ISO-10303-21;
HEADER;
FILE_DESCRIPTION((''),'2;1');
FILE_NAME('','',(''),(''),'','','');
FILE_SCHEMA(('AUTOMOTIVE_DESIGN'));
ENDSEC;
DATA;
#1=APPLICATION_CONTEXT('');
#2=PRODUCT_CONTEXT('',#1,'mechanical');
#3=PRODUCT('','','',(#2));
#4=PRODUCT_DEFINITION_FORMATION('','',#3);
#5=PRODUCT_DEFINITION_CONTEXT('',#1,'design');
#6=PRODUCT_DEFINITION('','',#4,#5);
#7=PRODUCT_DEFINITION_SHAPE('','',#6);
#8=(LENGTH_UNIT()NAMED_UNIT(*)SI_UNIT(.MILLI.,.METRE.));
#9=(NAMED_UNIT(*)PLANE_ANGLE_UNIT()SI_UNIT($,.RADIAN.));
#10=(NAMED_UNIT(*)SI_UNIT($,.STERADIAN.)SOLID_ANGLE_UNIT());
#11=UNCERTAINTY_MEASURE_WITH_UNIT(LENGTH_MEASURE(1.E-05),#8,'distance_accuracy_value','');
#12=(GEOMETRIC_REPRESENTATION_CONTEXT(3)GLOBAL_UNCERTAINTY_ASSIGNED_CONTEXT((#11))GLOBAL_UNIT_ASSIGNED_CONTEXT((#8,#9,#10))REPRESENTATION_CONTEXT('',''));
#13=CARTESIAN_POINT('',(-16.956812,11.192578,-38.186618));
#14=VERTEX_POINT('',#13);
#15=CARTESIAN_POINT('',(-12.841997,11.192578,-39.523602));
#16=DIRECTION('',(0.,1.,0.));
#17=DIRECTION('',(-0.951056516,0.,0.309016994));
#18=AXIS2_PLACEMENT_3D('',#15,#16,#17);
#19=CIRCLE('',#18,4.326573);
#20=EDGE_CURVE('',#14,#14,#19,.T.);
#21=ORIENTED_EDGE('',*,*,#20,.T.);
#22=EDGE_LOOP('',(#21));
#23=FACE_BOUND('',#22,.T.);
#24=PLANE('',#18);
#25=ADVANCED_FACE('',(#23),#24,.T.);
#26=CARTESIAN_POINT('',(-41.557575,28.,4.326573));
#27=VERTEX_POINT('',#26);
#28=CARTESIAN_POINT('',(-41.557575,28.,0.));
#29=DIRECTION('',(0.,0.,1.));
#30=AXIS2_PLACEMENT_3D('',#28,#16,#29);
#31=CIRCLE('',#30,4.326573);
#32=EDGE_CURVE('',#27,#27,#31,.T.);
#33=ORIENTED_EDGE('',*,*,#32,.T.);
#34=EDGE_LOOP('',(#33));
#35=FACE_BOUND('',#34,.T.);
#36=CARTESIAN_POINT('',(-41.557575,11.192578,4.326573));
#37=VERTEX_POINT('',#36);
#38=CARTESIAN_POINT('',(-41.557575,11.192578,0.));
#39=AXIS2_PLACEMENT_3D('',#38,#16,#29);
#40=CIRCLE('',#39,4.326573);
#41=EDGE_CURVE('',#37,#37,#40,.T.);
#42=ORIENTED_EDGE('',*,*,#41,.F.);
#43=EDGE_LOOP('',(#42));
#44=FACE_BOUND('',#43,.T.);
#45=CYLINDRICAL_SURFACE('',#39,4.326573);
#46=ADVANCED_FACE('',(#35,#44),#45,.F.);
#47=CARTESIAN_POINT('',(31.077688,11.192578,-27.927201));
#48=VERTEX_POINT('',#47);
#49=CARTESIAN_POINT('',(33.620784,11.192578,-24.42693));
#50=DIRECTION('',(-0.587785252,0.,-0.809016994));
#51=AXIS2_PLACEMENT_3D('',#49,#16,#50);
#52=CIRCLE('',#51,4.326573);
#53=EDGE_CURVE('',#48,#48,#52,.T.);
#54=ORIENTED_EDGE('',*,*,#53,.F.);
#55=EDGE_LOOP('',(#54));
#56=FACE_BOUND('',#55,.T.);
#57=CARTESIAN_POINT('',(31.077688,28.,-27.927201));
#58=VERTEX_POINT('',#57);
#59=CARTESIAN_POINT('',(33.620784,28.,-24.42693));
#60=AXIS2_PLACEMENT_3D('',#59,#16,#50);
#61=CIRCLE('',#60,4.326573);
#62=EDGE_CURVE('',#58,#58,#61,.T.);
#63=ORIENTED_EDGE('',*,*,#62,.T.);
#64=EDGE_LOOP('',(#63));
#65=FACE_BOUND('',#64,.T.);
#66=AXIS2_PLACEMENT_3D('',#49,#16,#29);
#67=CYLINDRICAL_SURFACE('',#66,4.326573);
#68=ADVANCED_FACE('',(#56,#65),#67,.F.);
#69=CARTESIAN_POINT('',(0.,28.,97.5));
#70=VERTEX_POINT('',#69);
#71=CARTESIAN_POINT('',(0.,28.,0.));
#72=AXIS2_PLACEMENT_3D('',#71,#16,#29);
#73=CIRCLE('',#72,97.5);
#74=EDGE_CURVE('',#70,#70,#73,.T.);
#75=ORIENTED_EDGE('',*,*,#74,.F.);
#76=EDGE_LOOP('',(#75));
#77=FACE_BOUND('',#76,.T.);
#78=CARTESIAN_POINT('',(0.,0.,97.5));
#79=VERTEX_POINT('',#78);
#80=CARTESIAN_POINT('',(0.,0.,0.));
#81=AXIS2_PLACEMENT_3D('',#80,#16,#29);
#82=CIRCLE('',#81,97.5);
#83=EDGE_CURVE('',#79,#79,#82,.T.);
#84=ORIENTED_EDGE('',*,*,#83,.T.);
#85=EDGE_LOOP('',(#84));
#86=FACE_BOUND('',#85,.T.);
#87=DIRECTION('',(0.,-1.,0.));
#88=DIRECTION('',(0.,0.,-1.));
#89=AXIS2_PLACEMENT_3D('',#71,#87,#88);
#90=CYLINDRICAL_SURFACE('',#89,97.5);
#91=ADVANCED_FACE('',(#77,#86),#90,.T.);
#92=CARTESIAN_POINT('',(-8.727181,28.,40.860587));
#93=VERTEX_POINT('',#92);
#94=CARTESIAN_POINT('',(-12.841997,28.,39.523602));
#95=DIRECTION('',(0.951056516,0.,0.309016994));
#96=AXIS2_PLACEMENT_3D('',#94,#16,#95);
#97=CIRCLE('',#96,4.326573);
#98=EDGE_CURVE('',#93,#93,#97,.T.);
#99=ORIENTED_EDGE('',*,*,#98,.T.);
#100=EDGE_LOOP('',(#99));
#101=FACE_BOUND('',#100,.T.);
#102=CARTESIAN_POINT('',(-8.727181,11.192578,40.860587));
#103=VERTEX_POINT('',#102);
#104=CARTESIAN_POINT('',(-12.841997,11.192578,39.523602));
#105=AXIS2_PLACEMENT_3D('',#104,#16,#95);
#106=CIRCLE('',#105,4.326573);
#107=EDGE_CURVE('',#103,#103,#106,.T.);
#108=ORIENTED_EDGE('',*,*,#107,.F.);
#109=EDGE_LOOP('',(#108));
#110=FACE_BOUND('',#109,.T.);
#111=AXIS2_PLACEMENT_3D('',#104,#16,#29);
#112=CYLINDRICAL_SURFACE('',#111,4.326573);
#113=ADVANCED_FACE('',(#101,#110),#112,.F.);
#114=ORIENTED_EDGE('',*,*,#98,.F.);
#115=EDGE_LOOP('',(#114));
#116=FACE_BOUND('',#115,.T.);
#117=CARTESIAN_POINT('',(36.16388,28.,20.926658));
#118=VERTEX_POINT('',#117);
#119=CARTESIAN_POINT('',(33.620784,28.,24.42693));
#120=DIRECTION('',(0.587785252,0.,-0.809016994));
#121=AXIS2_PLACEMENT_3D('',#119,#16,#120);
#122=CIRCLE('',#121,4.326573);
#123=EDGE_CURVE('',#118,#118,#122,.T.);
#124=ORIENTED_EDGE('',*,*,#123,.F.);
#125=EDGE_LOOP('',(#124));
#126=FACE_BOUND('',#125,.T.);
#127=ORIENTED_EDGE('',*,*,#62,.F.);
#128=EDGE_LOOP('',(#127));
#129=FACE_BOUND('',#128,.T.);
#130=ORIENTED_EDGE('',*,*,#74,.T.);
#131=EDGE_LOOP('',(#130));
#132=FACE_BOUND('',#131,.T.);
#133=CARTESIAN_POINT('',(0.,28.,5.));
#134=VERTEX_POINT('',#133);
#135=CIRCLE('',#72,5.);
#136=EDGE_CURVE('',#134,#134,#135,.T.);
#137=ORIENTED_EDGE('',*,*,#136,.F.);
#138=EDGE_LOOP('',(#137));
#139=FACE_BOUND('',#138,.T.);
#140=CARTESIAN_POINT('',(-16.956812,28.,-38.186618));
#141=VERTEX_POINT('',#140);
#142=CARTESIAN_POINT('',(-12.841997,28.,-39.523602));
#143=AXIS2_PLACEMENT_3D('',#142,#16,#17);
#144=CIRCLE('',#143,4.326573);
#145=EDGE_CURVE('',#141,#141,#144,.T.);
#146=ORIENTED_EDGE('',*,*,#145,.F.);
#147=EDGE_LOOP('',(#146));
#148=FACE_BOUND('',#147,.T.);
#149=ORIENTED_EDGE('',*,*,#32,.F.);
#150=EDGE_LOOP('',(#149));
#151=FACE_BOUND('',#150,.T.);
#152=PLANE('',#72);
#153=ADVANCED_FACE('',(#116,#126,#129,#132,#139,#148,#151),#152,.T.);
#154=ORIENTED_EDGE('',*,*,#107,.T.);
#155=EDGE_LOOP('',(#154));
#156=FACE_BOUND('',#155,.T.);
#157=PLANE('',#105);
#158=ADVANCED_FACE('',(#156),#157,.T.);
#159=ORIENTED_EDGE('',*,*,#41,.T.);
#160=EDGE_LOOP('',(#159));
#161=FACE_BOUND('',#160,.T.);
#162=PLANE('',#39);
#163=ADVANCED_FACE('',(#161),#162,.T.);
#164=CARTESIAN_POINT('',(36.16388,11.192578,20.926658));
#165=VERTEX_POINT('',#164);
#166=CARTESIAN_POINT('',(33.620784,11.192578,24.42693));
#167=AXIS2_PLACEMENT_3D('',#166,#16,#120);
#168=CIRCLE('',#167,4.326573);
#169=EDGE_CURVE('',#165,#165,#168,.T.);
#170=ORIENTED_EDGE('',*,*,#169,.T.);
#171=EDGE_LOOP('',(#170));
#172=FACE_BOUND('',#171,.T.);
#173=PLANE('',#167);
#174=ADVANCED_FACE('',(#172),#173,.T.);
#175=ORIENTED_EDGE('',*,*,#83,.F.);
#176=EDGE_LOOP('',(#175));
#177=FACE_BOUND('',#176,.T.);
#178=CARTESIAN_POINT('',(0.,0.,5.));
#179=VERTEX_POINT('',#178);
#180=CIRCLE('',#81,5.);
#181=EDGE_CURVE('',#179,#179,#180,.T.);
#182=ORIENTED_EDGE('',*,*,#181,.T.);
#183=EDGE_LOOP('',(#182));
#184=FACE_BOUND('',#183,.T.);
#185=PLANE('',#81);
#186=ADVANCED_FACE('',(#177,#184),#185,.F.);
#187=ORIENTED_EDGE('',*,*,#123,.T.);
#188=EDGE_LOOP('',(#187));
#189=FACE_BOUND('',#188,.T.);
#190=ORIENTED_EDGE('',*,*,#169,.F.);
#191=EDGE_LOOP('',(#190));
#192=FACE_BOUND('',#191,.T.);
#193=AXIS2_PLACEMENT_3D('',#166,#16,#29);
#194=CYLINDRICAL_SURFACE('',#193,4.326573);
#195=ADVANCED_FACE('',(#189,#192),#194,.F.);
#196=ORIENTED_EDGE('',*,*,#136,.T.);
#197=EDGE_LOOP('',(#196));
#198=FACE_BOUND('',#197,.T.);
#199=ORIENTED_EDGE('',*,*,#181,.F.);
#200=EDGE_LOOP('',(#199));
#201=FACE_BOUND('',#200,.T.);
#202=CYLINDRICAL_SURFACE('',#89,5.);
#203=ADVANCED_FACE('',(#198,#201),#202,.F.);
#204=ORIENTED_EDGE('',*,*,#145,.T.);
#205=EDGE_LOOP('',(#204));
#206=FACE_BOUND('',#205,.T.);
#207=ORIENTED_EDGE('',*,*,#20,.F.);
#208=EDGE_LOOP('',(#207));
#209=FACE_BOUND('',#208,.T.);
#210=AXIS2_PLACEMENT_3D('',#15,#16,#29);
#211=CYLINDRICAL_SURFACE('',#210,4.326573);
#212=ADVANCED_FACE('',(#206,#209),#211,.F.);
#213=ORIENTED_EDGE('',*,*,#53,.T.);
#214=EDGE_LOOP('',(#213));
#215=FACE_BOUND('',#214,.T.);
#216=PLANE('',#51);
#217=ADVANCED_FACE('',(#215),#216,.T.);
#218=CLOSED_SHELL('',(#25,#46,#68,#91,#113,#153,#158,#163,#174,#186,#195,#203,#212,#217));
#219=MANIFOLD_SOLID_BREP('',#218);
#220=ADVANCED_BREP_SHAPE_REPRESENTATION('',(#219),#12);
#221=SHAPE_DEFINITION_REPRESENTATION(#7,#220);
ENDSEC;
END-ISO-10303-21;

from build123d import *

# Parameters (mm, degrees)
SKETCH1_R           = 97.5
BOSS_EXTRUDE1_DEPTH = 28
SKETCH2_R           = 5
CUT_EXTRUDE1_DEPTH  = 141.700035537
SKETCH3_R           = 4.326572982
CUT_EXTRUDE2_DEPTH  = 16.807422219
CIRPATTERN1_COUNT   = 5


with BuildPart() as part:
    # Sketch1 → Boss-Extrude1 (new body)
    with BuildSketch(Plane(origin=(0, 0, 0), x_dir=(1, 0, 0), z_dir=(0, 1, 0))):
        Circle(SKETCH1_R)
    extrude(amount=BOSS_EXTRUDE1_DEPTH)

    # Sketch2 → Cut-Extrude1 (cut, through all)
    with BuildSketch(Plane(origin=(0, 0, 0), x_dir=(1, 0, 0), z_dir=(0, 1, 0))):
        Circle(SKETCH2_R)
    extrude(amount=CUT_EXTRUDE1_DEPTH, mode=Mode.SUBTRACT)

    # Sketch3 → Cut-Extrude2 (cut)
    with BuildSketch(Plane(origin=(0, 28, 0), x_dir=(1, 0, 0), z_dir=(0, 1, 0))):
        with Locations((-41.55757465, 0)):
            Circle(SKETCH3_R)
    cut_extrude2 = extrude(amount=-CUT_EXTRUDE2_DEPTH, mode=Mode.SUBTRACT)

    # CirPattern1: Cut-Extrude2 ×5 about axis
    cirpattern1_axis = Axis((0, 0, 0), (0, 1, 0))
    for i in range(1, CIRPATTERN1_COUNT):
        add(cut_extrude2.rotate(cirpattern1_axis, i * 360 / CIRPATTERN1_COUNT), mode=Mode.SUBTRACT)


solid = part.part
